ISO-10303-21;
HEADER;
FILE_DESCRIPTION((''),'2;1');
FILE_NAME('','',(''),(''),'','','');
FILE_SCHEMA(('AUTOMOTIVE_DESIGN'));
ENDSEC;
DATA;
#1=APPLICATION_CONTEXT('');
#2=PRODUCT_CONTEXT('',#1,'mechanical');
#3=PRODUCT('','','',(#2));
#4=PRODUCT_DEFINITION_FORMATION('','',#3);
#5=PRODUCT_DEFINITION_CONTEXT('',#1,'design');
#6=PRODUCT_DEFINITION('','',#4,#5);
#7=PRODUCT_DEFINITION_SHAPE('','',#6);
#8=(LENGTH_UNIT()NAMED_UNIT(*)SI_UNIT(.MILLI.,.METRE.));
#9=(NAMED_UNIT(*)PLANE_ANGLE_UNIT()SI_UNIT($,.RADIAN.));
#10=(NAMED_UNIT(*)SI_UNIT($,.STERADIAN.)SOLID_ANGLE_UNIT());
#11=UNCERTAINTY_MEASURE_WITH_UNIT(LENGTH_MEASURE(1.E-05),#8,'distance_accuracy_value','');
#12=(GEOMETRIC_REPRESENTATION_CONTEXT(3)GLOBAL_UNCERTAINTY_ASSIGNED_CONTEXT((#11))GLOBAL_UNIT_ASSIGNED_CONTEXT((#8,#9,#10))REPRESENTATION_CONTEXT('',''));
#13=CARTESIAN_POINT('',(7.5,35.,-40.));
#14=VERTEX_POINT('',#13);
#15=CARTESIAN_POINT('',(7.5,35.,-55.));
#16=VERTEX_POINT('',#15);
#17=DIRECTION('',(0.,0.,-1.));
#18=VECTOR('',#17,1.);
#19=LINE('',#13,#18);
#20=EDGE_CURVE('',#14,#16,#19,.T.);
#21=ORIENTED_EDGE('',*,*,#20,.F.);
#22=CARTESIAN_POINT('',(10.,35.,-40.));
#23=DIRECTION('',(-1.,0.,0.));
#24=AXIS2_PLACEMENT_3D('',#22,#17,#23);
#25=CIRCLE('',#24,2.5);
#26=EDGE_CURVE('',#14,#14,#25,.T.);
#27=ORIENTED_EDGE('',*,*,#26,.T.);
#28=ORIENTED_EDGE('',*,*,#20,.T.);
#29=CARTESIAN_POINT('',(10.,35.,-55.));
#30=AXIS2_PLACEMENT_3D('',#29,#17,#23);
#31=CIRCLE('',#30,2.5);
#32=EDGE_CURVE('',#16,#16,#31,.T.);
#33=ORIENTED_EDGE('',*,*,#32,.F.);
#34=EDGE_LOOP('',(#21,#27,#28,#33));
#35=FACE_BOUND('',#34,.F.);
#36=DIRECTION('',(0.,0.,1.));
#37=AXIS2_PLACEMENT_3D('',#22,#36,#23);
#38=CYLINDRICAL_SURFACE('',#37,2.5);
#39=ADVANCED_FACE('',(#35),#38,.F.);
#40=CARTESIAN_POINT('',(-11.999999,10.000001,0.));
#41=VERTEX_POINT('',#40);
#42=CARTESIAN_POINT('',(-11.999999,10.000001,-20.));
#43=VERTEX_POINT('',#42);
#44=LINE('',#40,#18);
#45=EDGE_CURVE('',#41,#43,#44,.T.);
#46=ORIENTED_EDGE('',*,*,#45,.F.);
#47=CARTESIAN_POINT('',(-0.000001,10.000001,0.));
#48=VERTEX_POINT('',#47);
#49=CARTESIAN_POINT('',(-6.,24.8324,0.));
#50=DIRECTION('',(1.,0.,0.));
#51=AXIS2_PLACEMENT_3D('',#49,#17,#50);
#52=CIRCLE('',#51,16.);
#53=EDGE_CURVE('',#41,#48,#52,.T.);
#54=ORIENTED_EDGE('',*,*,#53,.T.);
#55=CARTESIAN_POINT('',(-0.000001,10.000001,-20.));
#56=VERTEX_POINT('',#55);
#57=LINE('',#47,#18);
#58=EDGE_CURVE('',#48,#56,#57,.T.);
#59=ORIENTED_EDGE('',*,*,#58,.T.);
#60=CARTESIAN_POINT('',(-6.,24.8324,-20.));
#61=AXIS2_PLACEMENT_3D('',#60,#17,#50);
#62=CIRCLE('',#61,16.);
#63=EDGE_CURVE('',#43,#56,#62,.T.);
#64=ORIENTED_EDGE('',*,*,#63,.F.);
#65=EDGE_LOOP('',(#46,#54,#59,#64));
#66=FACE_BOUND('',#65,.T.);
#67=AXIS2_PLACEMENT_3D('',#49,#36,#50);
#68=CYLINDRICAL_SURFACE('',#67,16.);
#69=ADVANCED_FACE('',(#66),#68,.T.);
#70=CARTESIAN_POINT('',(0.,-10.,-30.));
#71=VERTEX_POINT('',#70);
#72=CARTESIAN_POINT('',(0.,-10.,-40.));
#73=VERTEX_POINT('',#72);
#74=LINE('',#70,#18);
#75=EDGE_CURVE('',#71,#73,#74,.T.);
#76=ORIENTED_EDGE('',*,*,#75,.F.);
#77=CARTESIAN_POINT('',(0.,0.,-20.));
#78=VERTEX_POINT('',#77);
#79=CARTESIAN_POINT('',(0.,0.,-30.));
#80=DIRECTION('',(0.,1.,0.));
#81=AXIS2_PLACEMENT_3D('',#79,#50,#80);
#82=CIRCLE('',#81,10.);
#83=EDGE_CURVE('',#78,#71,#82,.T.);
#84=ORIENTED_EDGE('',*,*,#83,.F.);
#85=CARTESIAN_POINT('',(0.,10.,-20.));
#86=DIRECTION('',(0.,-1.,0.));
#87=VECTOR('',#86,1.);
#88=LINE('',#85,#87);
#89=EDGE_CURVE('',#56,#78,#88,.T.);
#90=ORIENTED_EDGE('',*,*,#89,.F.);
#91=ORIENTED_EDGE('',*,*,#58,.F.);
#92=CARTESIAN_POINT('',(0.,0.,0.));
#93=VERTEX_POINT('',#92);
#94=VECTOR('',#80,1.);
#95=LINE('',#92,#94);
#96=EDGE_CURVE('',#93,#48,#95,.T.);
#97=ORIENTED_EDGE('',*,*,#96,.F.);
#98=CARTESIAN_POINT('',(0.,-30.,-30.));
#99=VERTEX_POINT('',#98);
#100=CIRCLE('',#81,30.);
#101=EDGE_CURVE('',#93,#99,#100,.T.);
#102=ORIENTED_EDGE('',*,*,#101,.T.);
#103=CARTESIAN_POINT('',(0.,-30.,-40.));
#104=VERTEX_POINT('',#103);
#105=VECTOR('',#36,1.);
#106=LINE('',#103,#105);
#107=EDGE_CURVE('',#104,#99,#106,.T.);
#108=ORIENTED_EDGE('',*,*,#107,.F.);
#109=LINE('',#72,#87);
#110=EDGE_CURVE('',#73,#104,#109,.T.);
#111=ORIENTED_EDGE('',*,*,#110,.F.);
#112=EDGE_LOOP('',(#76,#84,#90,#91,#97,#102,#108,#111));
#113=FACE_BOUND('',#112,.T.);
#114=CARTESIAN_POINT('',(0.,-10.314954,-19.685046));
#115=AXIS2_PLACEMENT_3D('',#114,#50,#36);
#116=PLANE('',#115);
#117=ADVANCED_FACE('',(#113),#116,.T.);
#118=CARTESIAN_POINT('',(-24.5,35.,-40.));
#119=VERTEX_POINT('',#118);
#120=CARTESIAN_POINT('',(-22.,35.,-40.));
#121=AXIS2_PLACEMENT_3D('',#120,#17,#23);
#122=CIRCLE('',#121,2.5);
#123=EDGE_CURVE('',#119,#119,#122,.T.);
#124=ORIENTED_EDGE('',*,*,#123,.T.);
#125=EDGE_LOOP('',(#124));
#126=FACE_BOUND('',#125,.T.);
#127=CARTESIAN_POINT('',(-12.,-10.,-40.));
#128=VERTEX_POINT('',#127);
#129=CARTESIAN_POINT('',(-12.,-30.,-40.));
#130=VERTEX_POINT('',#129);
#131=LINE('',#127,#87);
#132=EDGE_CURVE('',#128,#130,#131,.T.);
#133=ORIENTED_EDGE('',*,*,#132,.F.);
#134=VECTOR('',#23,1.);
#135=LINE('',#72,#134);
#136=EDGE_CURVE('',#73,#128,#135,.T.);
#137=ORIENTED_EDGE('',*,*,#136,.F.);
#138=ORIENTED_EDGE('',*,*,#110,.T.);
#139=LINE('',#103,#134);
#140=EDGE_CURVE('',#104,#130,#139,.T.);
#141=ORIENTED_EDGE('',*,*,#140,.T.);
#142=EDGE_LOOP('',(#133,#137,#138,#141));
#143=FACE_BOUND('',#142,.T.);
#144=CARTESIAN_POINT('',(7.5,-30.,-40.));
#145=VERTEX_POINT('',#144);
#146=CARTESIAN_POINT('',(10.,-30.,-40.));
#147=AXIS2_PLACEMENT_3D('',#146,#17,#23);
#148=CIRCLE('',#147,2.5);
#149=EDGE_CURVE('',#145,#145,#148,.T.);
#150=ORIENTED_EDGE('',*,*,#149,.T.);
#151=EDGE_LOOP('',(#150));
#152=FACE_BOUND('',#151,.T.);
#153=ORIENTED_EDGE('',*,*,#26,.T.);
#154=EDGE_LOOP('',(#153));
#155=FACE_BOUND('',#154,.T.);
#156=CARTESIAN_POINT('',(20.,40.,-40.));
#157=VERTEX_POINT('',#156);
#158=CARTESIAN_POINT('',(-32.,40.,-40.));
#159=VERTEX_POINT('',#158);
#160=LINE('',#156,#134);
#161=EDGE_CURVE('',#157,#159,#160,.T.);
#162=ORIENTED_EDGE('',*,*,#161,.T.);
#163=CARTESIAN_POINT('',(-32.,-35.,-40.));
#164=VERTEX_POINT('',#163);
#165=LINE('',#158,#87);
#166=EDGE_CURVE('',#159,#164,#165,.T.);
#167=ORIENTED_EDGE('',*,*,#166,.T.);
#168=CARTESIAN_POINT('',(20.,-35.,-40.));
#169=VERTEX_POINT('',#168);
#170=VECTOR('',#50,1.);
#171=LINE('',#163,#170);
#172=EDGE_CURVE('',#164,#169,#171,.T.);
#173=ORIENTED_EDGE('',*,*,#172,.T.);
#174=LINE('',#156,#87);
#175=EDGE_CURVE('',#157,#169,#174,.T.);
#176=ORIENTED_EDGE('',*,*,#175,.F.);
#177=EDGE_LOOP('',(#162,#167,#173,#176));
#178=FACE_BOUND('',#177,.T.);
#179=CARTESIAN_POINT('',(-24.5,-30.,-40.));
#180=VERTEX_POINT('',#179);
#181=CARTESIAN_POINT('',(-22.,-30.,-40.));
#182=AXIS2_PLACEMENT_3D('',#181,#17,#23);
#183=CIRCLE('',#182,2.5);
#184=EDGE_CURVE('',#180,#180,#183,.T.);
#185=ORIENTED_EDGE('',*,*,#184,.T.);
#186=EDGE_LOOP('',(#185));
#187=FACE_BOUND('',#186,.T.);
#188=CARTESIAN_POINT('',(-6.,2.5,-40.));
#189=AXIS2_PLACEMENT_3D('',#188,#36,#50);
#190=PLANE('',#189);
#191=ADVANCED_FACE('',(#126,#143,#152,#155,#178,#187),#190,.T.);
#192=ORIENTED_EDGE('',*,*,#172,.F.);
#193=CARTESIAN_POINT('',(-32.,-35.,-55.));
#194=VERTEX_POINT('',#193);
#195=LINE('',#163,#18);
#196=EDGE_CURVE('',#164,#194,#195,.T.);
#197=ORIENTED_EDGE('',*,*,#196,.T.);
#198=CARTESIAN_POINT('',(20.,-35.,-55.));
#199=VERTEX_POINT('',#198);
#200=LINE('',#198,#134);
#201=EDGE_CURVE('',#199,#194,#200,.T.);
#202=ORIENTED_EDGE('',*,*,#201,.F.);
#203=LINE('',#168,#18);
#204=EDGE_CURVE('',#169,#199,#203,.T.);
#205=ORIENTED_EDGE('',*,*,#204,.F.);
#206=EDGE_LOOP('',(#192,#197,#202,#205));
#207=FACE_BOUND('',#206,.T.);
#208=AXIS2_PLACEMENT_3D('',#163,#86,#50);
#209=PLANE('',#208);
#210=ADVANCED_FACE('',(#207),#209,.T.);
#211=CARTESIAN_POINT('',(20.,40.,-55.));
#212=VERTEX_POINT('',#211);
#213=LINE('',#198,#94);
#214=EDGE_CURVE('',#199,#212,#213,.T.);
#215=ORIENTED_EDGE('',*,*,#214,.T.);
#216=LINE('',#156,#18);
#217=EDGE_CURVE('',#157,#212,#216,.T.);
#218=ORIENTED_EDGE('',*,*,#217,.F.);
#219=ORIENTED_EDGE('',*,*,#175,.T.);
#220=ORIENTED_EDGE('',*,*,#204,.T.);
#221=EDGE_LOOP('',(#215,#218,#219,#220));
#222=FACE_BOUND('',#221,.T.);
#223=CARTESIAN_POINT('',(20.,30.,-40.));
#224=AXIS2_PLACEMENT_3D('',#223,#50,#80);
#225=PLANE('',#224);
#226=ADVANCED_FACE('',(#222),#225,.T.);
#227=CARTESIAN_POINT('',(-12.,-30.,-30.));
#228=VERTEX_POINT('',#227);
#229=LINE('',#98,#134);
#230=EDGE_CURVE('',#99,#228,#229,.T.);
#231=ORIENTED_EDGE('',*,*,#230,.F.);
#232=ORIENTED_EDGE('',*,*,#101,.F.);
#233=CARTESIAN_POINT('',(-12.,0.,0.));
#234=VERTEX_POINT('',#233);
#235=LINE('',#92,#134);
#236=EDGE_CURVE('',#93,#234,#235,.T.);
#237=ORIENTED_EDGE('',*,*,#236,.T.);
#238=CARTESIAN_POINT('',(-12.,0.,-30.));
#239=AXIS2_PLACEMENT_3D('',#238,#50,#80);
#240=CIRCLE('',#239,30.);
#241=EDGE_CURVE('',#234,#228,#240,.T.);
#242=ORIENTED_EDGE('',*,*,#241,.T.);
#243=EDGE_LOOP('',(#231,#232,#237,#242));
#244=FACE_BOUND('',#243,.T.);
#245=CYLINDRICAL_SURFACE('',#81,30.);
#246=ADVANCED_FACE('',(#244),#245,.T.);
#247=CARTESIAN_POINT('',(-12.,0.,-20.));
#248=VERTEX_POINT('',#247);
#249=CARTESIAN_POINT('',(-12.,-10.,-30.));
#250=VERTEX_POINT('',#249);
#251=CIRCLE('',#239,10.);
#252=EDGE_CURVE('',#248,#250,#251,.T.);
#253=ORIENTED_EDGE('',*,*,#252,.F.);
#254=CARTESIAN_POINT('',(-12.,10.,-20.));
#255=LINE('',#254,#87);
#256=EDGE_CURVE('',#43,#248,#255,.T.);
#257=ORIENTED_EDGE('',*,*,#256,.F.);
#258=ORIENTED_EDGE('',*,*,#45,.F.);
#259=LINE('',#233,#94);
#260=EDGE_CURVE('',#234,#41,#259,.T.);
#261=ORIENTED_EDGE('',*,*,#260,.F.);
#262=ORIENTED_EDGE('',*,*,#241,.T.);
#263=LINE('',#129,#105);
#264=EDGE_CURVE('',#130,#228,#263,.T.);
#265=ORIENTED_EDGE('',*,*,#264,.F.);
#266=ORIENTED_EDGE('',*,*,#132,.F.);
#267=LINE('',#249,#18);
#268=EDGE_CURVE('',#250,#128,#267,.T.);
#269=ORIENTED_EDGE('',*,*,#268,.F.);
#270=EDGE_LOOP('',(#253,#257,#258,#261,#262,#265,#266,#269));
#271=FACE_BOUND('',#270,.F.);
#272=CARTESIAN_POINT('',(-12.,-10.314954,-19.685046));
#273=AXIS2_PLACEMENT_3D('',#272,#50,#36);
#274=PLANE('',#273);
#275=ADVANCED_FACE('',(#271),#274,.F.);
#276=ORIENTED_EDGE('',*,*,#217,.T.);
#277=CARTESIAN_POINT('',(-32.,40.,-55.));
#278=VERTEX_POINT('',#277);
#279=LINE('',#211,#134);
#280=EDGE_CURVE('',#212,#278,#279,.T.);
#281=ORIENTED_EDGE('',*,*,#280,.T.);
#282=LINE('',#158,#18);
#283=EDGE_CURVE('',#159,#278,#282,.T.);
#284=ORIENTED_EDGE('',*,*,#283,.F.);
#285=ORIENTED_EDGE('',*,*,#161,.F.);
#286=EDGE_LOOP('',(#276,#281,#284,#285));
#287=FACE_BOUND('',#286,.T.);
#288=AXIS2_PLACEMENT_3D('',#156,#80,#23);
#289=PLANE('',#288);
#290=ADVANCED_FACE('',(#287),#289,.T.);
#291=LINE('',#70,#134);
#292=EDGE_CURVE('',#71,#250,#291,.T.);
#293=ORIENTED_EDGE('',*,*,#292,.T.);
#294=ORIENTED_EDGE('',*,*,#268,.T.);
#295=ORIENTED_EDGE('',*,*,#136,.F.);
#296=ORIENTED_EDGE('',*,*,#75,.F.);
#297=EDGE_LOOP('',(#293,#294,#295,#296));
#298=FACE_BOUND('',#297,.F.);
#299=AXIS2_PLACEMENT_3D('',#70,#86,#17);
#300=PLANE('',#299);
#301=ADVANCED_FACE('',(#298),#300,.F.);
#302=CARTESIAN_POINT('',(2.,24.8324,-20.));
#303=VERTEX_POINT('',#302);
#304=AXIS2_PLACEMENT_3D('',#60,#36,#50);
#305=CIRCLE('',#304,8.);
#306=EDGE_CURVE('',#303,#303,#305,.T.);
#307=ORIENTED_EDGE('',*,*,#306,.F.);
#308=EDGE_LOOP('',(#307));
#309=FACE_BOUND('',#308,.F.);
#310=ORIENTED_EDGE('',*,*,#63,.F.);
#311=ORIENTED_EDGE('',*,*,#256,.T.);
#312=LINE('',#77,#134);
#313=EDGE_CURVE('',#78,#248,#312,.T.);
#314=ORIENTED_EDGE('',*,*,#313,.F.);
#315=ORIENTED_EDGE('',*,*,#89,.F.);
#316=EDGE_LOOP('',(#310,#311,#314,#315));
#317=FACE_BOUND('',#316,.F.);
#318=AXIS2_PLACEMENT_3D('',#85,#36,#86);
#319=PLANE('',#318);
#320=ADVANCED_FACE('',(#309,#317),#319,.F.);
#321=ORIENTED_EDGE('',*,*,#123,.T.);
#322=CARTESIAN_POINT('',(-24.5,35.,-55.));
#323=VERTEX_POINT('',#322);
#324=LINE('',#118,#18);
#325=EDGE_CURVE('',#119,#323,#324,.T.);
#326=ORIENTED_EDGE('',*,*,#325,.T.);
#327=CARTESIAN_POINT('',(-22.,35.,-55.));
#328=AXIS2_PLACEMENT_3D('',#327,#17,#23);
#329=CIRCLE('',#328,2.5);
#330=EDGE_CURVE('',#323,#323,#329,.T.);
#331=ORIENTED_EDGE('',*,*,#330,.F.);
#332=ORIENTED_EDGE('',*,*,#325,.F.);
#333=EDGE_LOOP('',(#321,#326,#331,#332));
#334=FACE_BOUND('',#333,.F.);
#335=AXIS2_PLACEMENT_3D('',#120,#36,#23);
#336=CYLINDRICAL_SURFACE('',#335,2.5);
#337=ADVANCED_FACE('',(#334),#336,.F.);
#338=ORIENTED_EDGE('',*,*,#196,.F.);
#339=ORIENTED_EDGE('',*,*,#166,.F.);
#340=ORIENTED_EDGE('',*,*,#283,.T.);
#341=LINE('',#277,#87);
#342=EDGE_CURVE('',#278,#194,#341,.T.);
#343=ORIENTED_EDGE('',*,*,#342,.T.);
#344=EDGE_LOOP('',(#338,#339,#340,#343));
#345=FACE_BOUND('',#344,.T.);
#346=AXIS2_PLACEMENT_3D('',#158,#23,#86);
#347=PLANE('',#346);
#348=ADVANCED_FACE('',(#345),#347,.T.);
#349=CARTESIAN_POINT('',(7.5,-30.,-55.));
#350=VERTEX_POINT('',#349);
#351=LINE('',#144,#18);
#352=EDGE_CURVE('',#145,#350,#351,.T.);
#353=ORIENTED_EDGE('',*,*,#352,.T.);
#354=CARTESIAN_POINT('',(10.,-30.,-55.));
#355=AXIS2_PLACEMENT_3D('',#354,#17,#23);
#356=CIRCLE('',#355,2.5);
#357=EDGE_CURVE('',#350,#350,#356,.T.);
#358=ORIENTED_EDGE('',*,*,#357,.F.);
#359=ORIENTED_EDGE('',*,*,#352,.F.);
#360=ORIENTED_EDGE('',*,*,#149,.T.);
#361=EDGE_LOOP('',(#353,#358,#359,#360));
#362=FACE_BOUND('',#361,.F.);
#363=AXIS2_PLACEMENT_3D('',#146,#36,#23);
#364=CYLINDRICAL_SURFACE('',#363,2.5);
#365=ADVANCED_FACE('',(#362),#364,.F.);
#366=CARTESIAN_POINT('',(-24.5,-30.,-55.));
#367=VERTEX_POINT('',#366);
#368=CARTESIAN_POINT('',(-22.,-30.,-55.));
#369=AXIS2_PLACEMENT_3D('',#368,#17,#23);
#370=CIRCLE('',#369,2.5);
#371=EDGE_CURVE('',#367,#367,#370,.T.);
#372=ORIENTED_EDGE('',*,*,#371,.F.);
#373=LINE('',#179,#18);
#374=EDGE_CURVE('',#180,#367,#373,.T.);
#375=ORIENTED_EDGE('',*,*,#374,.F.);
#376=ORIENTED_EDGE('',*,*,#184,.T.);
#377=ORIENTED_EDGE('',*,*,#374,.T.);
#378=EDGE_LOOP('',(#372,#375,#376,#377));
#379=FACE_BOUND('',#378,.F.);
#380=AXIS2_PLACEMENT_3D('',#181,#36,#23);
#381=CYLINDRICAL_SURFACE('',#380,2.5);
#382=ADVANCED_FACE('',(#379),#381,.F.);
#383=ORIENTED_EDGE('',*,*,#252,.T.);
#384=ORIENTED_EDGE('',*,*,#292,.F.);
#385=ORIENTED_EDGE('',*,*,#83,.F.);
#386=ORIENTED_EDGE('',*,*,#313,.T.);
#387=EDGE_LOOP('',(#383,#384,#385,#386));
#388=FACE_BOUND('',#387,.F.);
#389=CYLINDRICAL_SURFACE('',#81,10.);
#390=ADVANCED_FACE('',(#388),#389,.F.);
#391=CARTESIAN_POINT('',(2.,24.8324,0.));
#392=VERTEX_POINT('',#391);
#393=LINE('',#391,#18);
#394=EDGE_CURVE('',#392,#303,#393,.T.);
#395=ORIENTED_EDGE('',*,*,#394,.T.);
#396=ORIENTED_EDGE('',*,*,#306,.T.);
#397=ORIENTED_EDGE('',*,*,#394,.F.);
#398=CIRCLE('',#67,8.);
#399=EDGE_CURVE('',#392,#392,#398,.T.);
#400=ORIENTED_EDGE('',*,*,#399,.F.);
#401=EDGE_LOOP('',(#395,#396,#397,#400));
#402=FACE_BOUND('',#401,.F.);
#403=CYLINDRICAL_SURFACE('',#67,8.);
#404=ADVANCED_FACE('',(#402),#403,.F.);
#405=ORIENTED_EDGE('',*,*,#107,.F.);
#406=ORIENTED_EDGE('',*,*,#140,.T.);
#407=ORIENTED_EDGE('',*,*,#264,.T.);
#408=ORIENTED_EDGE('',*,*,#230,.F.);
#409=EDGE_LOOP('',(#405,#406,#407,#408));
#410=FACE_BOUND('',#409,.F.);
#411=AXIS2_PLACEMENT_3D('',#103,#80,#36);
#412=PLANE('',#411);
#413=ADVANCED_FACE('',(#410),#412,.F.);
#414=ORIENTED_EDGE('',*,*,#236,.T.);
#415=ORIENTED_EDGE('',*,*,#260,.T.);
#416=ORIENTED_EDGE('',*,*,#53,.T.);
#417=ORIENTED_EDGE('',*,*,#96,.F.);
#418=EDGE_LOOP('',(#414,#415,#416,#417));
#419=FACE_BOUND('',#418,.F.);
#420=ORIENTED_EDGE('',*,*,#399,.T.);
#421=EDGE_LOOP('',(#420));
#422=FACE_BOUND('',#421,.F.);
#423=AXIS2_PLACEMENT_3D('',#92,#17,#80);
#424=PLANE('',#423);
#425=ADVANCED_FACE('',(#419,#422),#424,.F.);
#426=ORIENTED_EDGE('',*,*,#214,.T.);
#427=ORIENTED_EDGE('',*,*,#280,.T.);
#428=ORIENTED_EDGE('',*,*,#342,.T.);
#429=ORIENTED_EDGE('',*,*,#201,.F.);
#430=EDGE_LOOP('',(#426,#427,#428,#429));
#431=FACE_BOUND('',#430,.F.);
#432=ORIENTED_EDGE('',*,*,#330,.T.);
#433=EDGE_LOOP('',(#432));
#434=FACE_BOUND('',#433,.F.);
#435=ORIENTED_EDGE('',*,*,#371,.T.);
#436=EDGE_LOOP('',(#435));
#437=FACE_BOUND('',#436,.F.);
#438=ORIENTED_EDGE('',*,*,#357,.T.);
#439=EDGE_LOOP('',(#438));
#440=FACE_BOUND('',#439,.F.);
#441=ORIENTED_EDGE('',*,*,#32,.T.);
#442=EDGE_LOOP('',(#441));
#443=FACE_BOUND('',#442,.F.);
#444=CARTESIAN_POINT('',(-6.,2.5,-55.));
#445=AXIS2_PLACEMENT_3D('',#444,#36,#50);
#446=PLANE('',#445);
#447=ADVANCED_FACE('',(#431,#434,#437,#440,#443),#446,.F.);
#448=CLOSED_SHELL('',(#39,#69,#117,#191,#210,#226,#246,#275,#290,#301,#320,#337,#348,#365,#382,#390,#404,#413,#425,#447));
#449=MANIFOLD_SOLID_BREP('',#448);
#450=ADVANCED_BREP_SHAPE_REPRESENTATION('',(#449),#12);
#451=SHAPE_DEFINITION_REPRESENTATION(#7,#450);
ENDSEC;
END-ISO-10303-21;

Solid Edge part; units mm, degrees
sketch "Sketch1" plane through (0, 0, 0) normal (1, 0, 0) x (0, 1, 0)
  arc A0 (0, 0) -> (-30, -30) centre (0, -30) ccw
  line L0 (-30, -40) -> (-30, -30)
  line L1 (-10, -40) -> (-30, -40)
  line L2 (-10, -30) -> (-10, -40)
  arc A1 (0, -20) -> (-10, -30) centre (0, -30) ccw
  line L3 (10, -20) -> (0, -20)
  line L4 (10, 0) -> (10, -20)
  line L5 (0, 0) -> (10, 0)
extrude "Protrusion1" add sketch "Sketch1" against normal blind 12
sketch "Sketch2" plane through (0, 0, 0) normal (0, 0, 1) x (1, 0, 0)
  line L0 (0, 10) -> (-12, 10)
  arc A0 (-12, 10) -> (0, 10) centre (-6, 24.8324) cw
  circle A1 centre (-6, 24.8324) radius 8
extrude "ExtrudedProtrusion_3" add sketch "Sketch2" against normal blind 20
sketch "Sketch3" plane through (-6, -20, -40) normal (0, 0, -1) x (-1, 0, 0)
  line L0 (-26, 60) -> (26, 60)
  line L1 (26, 60) -> (26, -15)
  line L2 (26, -15) -> (0, -15)
  line L3 (0, -15) -> (-26, -15)
  line L4 (-26, -15) -> (-26, -5)
  line L5 (-26, -5) -> (-26, 50)
  line L6 (-26, 50) -> (-26, 60)
extrude "ExtrudedProtrusion_4" add sketch "Sketch3" along normal blind 15
sketch "Sketch4" plane through (-6, -20, -40) normal (0, 0, -1) x (-1, 0, 0)
  circle A0 centre (16, 55) radius 2.5
  circle A1 centre (-16, 55) radius 2.5
  circle A2 centre (-16, -10) radius 2.5
  circle A3 centre (16, -10) radius 2.5
extrude "ExtrudedCutout_1" cut sketch "Sketch4" along normal blind 15
